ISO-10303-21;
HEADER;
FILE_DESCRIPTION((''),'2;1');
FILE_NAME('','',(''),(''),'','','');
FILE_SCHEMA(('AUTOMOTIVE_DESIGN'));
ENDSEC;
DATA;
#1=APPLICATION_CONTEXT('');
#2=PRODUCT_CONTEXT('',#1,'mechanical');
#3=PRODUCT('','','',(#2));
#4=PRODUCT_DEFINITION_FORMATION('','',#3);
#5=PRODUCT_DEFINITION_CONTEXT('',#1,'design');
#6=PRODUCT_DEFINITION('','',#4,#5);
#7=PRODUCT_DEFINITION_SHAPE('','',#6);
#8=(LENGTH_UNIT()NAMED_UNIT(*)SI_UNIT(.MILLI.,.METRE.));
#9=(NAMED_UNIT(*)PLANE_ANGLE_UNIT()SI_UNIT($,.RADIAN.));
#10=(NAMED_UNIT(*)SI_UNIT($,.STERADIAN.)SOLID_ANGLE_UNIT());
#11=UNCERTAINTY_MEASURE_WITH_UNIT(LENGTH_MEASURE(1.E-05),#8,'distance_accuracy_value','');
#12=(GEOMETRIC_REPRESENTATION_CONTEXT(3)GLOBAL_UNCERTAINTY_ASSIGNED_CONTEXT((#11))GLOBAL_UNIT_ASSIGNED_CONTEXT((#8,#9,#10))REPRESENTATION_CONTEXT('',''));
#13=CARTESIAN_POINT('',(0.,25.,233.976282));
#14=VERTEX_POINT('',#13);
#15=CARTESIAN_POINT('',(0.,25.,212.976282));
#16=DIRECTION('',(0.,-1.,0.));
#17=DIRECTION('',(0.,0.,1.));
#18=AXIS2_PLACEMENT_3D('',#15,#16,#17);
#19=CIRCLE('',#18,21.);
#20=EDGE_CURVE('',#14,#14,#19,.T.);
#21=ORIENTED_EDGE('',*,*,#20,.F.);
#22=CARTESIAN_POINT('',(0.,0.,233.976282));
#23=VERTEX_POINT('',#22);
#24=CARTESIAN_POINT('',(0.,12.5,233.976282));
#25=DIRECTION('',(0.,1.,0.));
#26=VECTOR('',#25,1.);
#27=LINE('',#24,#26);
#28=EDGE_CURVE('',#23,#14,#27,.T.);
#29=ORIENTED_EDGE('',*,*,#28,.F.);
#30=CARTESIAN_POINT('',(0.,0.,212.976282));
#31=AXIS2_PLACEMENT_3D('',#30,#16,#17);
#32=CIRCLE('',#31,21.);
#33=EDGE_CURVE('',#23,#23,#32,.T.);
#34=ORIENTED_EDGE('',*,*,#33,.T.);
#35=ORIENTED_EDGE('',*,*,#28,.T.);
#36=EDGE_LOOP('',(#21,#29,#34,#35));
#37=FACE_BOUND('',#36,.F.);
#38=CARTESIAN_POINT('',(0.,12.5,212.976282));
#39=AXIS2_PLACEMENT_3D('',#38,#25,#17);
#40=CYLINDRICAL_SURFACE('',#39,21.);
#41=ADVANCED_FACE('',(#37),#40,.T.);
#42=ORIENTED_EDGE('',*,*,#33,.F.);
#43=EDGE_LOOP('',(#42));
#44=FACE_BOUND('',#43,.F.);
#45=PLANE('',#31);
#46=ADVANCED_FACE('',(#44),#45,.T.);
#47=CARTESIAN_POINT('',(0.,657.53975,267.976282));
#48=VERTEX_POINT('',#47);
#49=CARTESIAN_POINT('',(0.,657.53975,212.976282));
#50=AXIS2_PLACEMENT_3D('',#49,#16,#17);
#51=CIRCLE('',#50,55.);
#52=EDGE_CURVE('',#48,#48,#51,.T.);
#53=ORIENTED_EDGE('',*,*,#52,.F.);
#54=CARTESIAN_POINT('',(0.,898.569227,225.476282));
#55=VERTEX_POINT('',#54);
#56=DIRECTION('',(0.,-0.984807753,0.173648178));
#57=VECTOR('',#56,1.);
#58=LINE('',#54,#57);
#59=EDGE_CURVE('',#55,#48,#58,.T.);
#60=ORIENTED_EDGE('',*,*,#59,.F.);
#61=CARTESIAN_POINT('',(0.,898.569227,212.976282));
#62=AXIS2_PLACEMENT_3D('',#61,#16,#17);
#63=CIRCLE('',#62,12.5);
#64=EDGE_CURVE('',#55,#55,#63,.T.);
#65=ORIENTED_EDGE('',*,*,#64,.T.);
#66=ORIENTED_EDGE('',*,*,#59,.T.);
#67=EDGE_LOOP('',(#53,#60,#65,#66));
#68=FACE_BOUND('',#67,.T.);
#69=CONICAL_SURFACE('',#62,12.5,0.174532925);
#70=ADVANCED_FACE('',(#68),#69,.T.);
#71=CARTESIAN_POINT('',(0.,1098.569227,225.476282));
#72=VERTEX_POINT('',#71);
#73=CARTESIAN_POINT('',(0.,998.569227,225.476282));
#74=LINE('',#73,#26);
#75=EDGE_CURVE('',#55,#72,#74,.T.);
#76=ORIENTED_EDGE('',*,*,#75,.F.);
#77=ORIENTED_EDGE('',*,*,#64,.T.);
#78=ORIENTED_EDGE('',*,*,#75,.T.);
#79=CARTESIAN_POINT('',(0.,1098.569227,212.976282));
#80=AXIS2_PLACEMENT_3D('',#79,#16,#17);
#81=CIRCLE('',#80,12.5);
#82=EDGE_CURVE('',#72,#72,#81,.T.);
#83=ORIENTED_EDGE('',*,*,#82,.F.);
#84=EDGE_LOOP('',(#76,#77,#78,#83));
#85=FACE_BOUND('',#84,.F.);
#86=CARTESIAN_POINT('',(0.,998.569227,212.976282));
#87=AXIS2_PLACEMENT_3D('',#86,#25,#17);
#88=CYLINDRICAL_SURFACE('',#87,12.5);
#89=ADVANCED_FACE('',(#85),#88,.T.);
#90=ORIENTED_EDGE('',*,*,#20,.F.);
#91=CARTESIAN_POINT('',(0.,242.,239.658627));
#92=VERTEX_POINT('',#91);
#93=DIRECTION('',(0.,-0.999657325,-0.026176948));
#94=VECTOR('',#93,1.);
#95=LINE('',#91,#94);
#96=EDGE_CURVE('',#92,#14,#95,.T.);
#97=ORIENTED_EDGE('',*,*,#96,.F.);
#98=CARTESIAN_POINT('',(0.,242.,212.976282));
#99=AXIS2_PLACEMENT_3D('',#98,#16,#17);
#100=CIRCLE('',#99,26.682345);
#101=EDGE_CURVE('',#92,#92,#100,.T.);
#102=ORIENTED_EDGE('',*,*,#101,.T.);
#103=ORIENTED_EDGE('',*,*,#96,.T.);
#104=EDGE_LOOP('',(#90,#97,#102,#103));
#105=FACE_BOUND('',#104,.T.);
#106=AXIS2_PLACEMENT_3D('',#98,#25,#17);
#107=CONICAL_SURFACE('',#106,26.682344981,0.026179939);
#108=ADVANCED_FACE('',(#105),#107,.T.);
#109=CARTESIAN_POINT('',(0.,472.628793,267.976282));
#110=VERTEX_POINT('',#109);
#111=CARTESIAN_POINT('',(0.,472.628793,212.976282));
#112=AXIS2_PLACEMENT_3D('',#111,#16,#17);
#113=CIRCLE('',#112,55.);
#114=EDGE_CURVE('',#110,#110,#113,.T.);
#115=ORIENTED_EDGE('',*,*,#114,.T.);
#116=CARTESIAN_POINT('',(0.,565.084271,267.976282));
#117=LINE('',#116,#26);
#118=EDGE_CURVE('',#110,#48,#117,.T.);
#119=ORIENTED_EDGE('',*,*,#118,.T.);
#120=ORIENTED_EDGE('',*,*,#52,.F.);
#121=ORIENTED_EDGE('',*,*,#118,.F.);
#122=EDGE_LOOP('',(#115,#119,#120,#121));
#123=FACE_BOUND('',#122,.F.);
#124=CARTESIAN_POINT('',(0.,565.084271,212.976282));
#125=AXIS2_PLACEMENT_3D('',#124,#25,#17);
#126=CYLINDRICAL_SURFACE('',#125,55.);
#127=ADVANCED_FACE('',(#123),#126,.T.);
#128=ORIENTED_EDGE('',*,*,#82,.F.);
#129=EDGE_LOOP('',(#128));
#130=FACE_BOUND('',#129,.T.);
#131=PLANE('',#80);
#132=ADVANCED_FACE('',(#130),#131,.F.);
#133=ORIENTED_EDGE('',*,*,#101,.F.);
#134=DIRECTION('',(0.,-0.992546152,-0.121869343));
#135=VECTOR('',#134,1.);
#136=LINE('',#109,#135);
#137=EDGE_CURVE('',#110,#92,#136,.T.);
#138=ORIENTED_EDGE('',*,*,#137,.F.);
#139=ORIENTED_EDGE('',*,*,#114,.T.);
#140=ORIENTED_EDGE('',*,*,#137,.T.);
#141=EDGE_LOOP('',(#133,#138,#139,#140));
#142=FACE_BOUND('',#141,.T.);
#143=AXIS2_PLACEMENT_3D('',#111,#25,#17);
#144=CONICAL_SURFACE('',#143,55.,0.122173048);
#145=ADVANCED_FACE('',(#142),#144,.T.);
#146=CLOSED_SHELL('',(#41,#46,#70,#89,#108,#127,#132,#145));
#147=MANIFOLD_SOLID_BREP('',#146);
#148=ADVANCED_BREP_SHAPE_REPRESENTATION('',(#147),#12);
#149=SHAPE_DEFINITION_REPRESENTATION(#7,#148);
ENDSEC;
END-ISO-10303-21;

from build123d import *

# Parameters (mm, degrees)
F0_W   = 25
F0_H   = 21
F0_W_2 = 184.9109574539
F0_H_2 = 55
F0_W_3 = 200
F0_H_3 = 12.5


# Not quite as in the source:
# - the program builds the solid bodies; features that only make, move or delete a surface that nothing else refers to are left out


with BuildPart() as f1:
    # F0 (on Right) → F1 (revolve)
    with BuildSketch(Plane.YZ):
        with Locations((12.5, 223.4762815751)):
            Rectangle(F0_W, F0_H)
        Polygon((25, 233.9762815751), (25, 212.9762815751), (242, 212.9762815751), (242, 239.6586265556), align=None)
        Polygon((242, 239.6586265556), (242, 212.9762815751), (344.0616714118, 212.9762815751), (344.0616714118, 252.1902240649), align=None)
        Polygon((344.0616714118, 252.1902240649), (344.0616714118, 212.9762815751), (472.6287925066, 212.9762815751), (472.6287925066, 267.9762815751), align=None)
        with Locations((565.0842712335, 240.4762815751)):
            Rectangle(F0_W_2, F0_H_2)
        Polygon((657.5397499605, 267.9762815751), (657.5397499605, 212.9762815751), (813.5, 212.9762815751), (813.5, 240.4762815751), align=None)
        Polygon((813.5, 240.4762815751), (813.5, 212.9762815751), (898.5692272943, 212.9762815751), (898.5692272943, 225.4762815751), align=None)
        with Locations((998.5692272943, 219.2262815751)):
            Rectangle(F0_W_3, F0_H_3)
    revolve(axis=Axis((0, -32.5, 212.9762815751), (0, -1, 0)))


solid = f1.part
